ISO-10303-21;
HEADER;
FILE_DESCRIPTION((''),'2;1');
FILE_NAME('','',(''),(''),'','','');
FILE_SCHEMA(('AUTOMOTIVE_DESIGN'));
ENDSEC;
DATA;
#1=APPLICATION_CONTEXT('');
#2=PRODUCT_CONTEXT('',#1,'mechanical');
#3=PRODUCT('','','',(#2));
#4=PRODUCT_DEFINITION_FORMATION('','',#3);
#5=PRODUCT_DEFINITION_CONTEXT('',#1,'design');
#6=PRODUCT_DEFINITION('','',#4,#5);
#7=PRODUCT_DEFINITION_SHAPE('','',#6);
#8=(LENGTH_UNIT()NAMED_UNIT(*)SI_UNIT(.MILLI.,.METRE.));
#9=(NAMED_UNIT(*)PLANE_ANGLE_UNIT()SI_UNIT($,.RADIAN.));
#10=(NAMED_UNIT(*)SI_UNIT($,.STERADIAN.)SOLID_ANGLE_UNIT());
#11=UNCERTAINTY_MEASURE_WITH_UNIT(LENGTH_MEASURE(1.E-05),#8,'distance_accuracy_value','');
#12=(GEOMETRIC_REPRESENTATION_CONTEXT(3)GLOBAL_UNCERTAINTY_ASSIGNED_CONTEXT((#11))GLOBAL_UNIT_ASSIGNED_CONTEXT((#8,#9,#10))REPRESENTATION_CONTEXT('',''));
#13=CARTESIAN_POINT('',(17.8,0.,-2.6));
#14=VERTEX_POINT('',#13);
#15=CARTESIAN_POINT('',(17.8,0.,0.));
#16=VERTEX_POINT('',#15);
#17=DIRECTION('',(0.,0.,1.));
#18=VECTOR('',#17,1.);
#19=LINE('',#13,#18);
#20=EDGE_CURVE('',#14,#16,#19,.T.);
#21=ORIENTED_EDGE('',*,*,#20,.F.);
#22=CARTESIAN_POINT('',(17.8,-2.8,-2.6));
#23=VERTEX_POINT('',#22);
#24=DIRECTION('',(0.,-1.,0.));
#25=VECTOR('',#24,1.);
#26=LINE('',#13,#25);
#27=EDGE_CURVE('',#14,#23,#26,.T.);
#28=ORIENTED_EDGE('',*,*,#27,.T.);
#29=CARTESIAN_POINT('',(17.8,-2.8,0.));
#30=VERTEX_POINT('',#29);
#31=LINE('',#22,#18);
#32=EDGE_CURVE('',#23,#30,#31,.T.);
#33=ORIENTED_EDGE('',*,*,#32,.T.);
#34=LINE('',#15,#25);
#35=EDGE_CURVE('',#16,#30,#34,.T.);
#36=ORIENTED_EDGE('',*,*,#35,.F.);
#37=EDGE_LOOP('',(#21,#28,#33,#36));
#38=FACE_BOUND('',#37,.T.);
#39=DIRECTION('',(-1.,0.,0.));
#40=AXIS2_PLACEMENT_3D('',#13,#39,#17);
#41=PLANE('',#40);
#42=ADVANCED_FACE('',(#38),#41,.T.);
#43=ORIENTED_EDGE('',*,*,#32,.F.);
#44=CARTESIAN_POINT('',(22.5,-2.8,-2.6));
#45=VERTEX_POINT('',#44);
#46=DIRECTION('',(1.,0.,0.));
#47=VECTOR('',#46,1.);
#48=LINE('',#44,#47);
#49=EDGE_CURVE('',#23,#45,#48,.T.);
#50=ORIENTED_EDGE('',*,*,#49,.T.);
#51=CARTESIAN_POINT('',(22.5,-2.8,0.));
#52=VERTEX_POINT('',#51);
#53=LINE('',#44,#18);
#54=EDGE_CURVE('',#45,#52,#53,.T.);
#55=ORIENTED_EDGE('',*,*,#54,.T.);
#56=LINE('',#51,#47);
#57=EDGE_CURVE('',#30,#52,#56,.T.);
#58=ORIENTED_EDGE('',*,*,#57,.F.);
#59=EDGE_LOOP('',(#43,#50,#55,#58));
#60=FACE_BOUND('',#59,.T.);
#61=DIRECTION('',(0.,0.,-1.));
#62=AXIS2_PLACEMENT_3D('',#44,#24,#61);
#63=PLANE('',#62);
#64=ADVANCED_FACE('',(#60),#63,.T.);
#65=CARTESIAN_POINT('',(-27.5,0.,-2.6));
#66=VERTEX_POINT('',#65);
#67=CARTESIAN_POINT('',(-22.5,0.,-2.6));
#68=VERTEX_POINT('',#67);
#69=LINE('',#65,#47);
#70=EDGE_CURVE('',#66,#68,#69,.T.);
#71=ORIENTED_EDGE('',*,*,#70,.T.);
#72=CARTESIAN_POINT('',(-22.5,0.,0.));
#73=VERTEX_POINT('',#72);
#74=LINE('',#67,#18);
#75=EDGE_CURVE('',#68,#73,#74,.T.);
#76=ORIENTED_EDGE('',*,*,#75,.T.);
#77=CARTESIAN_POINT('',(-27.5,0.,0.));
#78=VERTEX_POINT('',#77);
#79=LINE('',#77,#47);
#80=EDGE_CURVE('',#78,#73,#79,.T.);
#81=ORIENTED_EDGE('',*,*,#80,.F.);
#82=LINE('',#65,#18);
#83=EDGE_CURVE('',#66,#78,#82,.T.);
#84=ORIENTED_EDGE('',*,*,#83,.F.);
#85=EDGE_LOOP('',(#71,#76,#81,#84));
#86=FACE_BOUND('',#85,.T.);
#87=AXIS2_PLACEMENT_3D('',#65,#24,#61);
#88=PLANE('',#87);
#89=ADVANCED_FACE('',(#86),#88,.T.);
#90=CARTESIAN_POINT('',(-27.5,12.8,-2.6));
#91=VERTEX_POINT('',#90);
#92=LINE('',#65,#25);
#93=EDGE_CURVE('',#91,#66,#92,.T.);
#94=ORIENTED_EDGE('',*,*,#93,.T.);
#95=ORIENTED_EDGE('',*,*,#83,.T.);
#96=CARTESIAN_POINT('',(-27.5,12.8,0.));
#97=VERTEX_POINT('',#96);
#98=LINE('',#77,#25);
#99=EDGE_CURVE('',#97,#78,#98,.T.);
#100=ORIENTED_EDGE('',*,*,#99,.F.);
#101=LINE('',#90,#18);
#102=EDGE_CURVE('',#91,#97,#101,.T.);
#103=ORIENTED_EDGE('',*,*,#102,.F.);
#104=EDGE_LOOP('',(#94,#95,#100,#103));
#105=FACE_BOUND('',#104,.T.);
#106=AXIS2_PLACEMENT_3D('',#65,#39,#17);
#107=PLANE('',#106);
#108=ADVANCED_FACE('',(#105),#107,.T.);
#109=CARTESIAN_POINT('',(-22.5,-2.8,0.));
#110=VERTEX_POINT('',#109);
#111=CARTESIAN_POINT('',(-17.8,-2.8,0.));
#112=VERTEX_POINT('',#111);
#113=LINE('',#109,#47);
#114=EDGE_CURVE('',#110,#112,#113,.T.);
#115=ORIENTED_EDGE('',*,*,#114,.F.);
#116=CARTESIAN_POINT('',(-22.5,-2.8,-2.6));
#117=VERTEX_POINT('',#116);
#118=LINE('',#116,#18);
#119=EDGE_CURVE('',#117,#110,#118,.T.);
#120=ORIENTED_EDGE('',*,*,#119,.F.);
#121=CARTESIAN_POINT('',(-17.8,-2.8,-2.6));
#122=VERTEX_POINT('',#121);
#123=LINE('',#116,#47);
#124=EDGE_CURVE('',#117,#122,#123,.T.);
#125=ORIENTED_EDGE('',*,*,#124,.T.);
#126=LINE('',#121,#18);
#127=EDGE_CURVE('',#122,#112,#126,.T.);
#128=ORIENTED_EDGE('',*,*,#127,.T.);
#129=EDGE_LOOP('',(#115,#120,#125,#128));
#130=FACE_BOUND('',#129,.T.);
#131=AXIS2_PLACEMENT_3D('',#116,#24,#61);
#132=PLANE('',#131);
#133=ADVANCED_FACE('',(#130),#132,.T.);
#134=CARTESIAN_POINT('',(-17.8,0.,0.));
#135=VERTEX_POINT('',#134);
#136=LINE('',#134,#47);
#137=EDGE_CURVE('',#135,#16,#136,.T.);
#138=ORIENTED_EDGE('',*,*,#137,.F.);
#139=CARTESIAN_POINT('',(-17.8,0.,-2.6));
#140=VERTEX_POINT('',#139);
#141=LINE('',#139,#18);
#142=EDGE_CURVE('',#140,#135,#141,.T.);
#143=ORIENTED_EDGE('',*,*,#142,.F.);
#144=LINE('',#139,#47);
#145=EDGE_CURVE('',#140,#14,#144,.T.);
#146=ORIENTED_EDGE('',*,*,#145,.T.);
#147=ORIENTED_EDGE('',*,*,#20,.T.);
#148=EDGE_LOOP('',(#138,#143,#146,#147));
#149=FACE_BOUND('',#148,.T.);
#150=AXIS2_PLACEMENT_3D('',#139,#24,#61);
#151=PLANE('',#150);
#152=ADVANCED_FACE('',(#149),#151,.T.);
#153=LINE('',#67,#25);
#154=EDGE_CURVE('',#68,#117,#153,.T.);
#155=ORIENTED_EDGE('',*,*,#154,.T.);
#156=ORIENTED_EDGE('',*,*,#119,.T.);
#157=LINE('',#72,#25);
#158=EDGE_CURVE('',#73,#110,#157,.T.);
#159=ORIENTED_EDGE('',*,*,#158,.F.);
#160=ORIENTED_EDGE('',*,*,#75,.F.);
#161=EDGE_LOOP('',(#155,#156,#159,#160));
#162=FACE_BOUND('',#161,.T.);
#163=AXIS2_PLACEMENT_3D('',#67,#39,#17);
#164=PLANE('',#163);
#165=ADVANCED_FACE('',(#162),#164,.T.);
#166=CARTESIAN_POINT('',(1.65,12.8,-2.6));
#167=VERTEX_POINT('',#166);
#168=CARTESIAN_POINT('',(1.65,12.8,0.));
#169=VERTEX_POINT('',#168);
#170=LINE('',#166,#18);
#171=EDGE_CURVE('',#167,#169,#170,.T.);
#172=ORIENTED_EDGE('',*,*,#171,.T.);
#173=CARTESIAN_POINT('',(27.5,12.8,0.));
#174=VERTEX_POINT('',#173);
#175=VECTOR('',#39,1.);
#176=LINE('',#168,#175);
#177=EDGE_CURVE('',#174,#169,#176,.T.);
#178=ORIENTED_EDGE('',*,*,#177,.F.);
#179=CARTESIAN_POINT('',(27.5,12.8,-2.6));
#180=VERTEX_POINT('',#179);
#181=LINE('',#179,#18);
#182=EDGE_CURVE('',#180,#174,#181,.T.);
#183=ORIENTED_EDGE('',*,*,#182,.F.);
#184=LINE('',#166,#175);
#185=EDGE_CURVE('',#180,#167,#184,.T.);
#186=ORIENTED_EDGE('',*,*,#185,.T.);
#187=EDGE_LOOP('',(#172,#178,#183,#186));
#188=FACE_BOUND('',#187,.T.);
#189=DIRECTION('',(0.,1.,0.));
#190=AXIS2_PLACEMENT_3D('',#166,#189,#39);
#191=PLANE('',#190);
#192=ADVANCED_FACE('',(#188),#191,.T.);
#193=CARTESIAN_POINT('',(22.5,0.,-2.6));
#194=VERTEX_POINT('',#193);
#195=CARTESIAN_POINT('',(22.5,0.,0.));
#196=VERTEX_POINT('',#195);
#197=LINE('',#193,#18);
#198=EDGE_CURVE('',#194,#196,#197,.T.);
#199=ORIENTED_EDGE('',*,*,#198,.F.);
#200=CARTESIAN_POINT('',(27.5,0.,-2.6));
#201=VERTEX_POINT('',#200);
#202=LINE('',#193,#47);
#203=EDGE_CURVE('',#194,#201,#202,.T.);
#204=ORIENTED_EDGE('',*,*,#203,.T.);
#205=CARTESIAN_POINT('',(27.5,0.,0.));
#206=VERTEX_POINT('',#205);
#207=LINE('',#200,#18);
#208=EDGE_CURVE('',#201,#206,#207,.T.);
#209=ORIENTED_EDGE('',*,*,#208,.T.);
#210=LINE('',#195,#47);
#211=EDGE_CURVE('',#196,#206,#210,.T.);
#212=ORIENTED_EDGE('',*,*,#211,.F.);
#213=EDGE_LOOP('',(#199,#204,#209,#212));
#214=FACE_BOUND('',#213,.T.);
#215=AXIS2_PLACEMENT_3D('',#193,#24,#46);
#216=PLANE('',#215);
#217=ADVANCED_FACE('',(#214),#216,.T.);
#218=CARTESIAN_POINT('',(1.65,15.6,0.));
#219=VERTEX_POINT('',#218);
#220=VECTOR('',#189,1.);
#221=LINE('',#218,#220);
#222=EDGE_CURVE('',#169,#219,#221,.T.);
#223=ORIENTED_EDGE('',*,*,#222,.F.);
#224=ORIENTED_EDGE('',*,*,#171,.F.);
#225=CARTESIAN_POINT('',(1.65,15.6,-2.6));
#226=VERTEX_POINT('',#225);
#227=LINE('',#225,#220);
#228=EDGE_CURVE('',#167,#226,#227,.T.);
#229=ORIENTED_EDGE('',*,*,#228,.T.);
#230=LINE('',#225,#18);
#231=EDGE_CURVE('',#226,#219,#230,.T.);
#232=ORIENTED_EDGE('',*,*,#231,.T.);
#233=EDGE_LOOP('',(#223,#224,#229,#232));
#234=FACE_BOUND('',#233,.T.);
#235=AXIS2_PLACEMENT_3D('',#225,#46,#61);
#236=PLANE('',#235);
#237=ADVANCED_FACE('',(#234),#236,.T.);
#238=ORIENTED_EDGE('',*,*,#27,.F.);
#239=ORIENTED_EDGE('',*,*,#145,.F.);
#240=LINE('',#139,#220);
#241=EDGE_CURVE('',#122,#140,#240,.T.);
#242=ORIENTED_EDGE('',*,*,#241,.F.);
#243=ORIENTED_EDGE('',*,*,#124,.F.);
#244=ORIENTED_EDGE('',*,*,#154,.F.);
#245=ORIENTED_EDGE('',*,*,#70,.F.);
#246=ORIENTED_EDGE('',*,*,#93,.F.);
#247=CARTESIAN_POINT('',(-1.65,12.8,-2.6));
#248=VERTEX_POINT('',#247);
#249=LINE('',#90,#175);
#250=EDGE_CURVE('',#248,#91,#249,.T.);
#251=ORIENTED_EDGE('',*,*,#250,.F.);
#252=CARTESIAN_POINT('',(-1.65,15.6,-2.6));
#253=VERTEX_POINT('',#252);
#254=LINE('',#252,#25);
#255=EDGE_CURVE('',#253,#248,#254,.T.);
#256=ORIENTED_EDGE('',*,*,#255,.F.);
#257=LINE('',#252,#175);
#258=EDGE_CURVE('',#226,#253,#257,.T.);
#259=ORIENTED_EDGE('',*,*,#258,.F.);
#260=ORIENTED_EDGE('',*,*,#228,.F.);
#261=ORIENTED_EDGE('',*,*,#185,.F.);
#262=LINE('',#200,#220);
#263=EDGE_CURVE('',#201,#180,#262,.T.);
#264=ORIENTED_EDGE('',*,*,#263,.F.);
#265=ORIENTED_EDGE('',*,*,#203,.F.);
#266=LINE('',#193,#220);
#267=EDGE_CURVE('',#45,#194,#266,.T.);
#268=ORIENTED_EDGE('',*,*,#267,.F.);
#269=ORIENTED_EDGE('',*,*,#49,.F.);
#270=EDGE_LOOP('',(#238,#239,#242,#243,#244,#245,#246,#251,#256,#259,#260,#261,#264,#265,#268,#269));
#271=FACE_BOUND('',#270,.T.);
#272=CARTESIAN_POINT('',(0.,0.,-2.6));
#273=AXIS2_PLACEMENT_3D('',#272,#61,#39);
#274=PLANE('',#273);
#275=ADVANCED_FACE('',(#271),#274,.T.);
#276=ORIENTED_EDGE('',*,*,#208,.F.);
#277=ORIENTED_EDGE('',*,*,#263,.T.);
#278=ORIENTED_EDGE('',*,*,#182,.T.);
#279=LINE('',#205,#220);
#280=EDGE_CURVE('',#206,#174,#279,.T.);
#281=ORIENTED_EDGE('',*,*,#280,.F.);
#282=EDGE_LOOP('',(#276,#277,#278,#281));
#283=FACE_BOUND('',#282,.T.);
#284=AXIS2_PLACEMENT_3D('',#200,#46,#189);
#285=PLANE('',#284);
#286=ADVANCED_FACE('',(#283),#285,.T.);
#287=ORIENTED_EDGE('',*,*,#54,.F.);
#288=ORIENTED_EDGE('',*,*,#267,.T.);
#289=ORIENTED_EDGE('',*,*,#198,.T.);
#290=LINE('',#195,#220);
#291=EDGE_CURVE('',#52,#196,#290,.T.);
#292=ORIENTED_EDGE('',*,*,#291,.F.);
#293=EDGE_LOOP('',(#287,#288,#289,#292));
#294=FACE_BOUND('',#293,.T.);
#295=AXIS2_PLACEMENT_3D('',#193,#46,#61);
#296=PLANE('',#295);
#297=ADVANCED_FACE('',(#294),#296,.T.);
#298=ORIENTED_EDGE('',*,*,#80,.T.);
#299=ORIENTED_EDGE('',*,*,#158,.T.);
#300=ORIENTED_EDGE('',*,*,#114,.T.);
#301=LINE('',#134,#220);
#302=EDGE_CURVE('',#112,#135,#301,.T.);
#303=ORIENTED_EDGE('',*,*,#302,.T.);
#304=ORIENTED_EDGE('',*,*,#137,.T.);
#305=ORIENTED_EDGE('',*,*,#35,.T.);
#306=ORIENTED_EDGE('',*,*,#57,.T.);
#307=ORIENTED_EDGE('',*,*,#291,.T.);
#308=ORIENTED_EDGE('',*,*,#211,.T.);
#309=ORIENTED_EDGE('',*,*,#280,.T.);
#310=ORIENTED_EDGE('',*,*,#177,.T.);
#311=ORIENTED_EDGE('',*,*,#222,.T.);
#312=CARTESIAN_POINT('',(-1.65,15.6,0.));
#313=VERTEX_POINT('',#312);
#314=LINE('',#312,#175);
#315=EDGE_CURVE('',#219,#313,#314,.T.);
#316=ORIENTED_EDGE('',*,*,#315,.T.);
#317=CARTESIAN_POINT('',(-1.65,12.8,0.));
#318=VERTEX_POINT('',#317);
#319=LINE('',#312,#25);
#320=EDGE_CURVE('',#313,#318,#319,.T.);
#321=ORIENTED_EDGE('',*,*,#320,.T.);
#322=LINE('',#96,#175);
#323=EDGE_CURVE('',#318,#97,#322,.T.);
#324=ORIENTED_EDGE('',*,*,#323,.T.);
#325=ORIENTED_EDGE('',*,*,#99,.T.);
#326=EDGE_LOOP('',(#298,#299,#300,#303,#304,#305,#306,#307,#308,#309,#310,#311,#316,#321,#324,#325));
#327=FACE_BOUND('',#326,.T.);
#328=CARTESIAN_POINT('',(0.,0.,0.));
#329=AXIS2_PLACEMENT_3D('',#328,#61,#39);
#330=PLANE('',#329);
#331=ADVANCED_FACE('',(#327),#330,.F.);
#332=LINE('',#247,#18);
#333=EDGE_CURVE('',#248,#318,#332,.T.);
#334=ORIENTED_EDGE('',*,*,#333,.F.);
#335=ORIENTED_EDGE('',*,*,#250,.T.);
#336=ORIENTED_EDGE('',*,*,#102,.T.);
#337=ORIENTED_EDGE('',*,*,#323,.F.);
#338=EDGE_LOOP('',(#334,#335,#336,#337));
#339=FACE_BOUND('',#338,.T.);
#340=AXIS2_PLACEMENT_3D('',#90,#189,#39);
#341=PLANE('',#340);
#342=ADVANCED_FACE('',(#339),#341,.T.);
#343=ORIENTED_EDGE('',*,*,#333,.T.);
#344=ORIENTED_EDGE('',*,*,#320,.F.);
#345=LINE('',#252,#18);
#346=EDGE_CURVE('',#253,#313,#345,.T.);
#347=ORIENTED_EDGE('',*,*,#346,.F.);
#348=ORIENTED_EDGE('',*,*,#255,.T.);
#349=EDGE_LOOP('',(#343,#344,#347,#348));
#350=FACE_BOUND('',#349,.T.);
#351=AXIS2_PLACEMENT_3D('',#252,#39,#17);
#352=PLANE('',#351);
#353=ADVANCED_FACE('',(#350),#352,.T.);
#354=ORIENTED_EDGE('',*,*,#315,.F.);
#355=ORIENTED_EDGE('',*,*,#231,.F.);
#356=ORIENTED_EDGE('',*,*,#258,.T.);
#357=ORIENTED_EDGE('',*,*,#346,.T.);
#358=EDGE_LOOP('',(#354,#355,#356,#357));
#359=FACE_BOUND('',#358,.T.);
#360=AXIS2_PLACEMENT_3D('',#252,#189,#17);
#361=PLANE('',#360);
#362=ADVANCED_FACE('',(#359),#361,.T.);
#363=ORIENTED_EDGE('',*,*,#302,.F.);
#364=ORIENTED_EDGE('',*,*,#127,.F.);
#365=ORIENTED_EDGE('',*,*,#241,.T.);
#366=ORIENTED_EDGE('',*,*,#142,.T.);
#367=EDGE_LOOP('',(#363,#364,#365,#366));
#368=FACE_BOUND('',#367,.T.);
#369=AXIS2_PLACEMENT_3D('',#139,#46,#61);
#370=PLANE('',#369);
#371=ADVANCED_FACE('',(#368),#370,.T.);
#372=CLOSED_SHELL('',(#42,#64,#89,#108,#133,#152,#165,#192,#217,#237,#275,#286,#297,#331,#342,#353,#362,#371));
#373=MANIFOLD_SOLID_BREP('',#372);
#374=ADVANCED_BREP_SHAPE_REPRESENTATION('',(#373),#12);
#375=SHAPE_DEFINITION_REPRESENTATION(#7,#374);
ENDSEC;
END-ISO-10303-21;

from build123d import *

# Parameters (mm, degrees)
BASE_FLANGE1_DEPTH = 2.6


# Sheet-metal steps are written as plain solids
with BuildPart() as part:
    # Sketch1 → Base-Flange1 (new body)
    with BuildSketch(Plane.XY):
        Polygon((-27.5, 0), (-22.5, 0), (-22.5, -2.8), (-17.8, -2.8), (-17.8, 0), (17.8, 0), (17.8, -2.8), (22.5, -2.8), (22.5, 0), (27.5, 0), (27.5, 12.8), (1.65, 12.8), (1.65, 15.6), (-1.65, 15.6), (-1.65, 12.8), (-27.5, 12.8), align=None)
    extrude(amount=-BASE_FLANGE1_DEPTH)


solid = part.part
